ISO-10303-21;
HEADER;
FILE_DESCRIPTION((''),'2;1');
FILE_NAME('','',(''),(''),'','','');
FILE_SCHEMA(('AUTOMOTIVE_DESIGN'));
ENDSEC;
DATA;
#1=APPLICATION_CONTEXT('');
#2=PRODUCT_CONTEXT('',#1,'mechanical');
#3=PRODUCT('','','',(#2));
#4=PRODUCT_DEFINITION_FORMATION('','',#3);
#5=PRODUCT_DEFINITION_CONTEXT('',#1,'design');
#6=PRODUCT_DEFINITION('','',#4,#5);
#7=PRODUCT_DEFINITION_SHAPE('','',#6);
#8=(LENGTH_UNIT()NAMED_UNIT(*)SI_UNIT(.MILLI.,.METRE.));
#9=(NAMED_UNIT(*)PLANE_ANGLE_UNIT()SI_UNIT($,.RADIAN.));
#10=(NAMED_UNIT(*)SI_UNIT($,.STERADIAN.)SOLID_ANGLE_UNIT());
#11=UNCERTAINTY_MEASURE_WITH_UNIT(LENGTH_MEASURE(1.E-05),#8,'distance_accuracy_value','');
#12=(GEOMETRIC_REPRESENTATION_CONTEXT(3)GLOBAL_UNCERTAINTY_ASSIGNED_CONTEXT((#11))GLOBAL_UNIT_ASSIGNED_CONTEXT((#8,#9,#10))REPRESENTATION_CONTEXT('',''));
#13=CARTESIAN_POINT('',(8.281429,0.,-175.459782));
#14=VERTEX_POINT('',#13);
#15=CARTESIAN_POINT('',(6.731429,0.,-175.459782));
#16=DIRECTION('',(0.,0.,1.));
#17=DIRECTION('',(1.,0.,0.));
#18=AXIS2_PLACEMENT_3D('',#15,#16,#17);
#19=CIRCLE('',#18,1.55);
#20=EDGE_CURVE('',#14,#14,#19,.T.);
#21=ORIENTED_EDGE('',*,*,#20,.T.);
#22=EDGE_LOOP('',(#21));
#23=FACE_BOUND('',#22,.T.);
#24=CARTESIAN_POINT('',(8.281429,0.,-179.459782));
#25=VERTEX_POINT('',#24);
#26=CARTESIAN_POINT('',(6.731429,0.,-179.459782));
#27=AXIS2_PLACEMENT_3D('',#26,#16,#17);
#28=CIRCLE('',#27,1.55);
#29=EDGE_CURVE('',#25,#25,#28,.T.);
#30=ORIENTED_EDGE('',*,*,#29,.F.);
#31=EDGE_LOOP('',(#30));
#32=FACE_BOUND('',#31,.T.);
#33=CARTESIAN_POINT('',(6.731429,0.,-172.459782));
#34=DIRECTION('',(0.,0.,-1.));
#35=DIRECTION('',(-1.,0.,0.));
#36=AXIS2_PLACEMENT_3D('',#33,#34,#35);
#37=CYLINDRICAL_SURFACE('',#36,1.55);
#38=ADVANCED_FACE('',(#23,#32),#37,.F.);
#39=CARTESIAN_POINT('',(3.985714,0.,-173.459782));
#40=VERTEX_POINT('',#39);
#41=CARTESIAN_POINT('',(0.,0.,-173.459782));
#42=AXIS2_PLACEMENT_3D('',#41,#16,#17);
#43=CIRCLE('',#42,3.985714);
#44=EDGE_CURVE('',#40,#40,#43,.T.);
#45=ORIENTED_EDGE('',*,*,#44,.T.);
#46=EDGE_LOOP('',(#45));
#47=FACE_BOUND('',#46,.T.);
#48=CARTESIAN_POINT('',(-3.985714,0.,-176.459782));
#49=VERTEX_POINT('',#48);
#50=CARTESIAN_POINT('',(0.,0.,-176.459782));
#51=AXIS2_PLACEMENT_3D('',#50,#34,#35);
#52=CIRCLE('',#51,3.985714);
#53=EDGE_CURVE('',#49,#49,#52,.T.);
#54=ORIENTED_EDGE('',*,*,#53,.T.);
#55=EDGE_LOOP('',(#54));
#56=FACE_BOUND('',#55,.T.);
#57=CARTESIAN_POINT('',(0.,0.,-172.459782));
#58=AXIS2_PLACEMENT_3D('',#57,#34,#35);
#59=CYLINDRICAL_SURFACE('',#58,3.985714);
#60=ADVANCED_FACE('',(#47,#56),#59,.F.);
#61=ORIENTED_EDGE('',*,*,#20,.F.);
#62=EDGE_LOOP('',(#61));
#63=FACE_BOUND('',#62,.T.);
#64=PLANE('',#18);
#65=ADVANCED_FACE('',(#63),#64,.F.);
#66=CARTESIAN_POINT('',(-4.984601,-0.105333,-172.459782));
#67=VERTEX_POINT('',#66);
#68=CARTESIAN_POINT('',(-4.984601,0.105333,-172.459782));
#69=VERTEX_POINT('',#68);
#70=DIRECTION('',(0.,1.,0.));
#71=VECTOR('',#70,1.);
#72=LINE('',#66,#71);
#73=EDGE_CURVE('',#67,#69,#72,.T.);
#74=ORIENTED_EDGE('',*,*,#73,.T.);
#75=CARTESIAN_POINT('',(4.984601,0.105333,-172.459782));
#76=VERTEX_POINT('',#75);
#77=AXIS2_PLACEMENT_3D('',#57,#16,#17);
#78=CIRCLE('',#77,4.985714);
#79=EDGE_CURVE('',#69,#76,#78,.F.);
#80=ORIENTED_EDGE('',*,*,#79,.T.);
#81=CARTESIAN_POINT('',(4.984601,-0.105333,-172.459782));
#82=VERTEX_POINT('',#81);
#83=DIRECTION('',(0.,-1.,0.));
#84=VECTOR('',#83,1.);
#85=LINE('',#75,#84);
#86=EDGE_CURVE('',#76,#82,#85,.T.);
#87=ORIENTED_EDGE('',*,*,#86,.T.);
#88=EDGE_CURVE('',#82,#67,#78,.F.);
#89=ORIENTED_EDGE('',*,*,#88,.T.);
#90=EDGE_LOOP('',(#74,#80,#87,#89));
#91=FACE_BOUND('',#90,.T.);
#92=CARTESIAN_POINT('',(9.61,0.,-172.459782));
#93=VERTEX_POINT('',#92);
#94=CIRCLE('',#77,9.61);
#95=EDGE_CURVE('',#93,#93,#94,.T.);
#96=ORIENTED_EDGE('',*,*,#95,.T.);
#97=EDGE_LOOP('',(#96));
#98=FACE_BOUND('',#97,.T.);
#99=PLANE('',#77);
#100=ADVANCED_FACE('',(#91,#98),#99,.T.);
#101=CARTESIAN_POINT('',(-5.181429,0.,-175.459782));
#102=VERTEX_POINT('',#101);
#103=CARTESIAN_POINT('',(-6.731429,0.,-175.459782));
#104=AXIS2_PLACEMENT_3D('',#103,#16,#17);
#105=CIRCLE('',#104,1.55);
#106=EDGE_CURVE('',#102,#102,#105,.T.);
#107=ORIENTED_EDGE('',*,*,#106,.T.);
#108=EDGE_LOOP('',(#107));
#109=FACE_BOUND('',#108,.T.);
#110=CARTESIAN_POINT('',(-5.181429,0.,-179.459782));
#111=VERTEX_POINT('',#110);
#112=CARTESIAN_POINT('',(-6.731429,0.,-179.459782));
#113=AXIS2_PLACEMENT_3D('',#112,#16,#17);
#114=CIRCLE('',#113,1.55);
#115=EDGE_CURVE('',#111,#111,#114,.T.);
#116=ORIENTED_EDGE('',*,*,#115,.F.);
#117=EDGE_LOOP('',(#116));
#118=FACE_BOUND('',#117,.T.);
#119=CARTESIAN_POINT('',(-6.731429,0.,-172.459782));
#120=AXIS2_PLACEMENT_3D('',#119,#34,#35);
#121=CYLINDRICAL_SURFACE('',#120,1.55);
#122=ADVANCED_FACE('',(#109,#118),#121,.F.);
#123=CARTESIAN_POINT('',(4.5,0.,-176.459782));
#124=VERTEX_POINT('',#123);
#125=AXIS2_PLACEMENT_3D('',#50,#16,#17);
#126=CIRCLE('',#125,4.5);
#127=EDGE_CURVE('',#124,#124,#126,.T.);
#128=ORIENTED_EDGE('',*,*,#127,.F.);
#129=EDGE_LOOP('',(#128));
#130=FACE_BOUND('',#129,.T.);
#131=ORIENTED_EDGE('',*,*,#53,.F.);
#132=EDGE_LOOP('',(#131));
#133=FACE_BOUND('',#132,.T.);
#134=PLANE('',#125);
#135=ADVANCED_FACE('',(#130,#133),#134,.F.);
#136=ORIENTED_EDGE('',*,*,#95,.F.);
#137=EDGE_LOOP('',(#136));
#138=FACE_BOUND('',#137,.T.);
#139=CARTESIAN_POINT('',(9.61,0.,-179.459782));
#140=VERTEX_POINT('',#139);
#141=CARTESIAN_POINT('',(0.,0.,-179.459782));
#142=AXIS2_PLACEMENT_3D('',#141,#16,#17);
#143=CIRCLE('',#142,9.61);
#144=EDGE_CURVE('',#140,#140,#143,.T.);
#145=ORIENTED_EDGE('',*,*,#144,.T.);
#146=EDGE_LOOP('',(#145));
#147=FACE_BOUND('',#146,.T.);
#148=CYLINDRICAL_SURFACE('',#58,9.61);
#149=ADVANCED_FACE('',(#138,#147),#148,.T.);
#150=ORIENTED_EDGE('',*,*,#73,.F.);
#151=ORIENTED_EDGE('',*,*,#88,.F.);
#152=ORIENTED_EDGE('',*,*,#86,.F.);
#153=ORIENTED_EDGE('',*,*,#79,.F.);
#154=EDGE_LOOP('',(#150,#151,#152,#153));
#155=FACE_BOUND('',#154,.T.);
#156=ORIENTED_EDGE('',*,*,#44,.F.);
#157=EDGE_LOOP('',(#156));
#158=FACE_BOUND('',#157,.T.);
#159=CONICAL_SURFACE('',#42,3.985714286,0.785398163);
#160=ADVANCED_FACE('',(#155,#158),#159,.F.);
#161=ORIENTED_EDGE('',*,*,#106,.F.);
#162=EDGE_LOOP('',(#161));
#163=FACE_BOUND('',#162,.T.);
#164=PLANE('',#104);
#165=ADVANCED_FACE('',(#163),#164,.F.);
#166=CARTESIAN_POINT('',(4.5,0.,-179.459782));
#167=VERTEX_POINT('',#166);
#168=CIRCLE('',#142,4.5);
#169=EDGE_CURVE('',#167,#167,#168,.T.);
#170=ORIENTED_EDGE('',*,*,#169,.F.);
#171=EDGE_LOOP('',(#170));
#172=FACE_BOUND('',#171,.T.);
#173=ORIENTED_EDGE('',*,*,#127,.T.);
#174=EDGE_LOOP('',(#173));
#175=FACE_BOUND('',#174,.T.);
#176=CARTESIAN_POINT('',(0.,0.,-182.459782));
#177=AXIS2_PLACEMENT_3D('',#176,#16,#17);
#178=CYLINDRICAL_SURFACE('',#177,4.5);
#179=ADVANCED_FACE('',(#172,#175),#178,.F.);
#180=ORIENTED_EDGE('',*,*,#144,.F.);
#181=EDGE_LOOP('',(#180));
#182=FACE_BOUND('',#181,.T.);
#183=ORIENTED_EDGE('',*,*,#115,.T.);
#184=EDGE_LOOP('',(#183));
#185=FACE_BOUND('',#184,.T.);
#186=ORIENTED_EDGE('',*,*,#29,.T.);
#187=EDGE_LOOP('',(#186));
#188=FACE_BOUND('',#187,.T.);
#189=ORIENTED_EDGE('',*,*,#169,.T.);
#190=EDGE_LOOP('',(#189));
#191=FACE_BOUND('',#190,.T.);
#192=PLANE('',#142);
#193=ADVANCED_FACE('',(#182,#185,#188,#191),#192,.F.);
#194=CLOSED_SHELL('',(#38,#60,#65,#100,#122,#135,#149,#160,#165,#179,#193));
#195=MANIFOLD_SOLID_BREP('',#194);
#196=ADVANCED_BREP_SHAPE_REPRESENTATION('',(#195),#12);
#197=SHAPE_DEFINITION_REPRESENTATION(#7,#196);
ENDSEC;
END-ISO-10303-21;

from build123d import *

# Parameters (mm, degrees)
SKETCH2_R               = 9.61
SKETCH2_R_2             = 3.985714286
SKETCH2_R_3             = 1.55
BOSS_EXTRUDE2_DEPTH     = 7
SKETCH3_R               = 4.5
BOSS_EXTRUDE3_DEPTH     = 3
SKETCH4_R               = 4.5
CUT_EXTRUDE1_DEPTH      = 6
CHAMFER3_SIZE           = 1
BOSS_EXTRUDE4_START     = -3
BOSS_EXTRUDE4_OUTLINE_R = 1.55
BOSS_EXTRUDE4_DEPTH     = 3


# Read off the part's stored shape, not the designer's step: Boss-Extrude4
with BuildPart() as part:
    # Sketch2 → Boss-Extrude2 (new body)
    with BuildSketch(Plane.XY.offset(-179.459781676)):
        Circle(SKETCH2_R)
        Circle(SKETCH2_R_2, mode=Mode.SUBTRACT)
        with Locations((6.731428571, 0)):
            Circle(SKETCH2_R_3, mode=Mode.SUBTRACT)
        with Locations((-6.731428571, 0)):
            Circle(SKETCH2_R_3, mode=Mode.SUBTRACT)
    extrude(amount=BOSS_EXTRUDE2_DEPTH)

    # Sketch3 → Boss-Extrude3 (add)
    with BuildSketch(Plane(origin=(0, 0, -179.459781676), x_dir=(-1, 0, 0), z_dir=(0, 0, -1))):
        Circle(SKETCH3_R)
    extrude(amount=-BOSS_EXTRUDE3_DEPTH)

    # Sketch4 → Cut-Extrude1 (cut)
    with BuildSketch(Plane.XY.offset(-176.459781676)):
        Circle(SKETCH4_R)
    extrude(amount=-CUT_EXTRUDE1_DEPTH, mode=Mode.SUBTRACT)

    # Chamfer3
    chamfer3_edges = [part.edges().sort_by_distance(p)[0] for p in [
        (-3.985714286, 0, -172.459781676),
    ]]
    chamfer(chamfer3_edges, length=CHAMFER3_SIZE)

    # Boss-Extrude4 outline → Boss-Extrude4 (add)
    with BuildSketch(Plane.XY.offset(-172.459781676).offset(BOSS_EXTRUDE4_START)):
        with Locations((6.731428571, 0)):
            Circle(BOSS_EXTRUDE4_OUTLINE_R)
        with Locations((-6.731428571, 0)):
            Circle(BOSS_EXTRUDE4_OUTLINE_R)
    extrude(amount=BOSS_EXTRUDE4_DEPTH)


solid = part.part
